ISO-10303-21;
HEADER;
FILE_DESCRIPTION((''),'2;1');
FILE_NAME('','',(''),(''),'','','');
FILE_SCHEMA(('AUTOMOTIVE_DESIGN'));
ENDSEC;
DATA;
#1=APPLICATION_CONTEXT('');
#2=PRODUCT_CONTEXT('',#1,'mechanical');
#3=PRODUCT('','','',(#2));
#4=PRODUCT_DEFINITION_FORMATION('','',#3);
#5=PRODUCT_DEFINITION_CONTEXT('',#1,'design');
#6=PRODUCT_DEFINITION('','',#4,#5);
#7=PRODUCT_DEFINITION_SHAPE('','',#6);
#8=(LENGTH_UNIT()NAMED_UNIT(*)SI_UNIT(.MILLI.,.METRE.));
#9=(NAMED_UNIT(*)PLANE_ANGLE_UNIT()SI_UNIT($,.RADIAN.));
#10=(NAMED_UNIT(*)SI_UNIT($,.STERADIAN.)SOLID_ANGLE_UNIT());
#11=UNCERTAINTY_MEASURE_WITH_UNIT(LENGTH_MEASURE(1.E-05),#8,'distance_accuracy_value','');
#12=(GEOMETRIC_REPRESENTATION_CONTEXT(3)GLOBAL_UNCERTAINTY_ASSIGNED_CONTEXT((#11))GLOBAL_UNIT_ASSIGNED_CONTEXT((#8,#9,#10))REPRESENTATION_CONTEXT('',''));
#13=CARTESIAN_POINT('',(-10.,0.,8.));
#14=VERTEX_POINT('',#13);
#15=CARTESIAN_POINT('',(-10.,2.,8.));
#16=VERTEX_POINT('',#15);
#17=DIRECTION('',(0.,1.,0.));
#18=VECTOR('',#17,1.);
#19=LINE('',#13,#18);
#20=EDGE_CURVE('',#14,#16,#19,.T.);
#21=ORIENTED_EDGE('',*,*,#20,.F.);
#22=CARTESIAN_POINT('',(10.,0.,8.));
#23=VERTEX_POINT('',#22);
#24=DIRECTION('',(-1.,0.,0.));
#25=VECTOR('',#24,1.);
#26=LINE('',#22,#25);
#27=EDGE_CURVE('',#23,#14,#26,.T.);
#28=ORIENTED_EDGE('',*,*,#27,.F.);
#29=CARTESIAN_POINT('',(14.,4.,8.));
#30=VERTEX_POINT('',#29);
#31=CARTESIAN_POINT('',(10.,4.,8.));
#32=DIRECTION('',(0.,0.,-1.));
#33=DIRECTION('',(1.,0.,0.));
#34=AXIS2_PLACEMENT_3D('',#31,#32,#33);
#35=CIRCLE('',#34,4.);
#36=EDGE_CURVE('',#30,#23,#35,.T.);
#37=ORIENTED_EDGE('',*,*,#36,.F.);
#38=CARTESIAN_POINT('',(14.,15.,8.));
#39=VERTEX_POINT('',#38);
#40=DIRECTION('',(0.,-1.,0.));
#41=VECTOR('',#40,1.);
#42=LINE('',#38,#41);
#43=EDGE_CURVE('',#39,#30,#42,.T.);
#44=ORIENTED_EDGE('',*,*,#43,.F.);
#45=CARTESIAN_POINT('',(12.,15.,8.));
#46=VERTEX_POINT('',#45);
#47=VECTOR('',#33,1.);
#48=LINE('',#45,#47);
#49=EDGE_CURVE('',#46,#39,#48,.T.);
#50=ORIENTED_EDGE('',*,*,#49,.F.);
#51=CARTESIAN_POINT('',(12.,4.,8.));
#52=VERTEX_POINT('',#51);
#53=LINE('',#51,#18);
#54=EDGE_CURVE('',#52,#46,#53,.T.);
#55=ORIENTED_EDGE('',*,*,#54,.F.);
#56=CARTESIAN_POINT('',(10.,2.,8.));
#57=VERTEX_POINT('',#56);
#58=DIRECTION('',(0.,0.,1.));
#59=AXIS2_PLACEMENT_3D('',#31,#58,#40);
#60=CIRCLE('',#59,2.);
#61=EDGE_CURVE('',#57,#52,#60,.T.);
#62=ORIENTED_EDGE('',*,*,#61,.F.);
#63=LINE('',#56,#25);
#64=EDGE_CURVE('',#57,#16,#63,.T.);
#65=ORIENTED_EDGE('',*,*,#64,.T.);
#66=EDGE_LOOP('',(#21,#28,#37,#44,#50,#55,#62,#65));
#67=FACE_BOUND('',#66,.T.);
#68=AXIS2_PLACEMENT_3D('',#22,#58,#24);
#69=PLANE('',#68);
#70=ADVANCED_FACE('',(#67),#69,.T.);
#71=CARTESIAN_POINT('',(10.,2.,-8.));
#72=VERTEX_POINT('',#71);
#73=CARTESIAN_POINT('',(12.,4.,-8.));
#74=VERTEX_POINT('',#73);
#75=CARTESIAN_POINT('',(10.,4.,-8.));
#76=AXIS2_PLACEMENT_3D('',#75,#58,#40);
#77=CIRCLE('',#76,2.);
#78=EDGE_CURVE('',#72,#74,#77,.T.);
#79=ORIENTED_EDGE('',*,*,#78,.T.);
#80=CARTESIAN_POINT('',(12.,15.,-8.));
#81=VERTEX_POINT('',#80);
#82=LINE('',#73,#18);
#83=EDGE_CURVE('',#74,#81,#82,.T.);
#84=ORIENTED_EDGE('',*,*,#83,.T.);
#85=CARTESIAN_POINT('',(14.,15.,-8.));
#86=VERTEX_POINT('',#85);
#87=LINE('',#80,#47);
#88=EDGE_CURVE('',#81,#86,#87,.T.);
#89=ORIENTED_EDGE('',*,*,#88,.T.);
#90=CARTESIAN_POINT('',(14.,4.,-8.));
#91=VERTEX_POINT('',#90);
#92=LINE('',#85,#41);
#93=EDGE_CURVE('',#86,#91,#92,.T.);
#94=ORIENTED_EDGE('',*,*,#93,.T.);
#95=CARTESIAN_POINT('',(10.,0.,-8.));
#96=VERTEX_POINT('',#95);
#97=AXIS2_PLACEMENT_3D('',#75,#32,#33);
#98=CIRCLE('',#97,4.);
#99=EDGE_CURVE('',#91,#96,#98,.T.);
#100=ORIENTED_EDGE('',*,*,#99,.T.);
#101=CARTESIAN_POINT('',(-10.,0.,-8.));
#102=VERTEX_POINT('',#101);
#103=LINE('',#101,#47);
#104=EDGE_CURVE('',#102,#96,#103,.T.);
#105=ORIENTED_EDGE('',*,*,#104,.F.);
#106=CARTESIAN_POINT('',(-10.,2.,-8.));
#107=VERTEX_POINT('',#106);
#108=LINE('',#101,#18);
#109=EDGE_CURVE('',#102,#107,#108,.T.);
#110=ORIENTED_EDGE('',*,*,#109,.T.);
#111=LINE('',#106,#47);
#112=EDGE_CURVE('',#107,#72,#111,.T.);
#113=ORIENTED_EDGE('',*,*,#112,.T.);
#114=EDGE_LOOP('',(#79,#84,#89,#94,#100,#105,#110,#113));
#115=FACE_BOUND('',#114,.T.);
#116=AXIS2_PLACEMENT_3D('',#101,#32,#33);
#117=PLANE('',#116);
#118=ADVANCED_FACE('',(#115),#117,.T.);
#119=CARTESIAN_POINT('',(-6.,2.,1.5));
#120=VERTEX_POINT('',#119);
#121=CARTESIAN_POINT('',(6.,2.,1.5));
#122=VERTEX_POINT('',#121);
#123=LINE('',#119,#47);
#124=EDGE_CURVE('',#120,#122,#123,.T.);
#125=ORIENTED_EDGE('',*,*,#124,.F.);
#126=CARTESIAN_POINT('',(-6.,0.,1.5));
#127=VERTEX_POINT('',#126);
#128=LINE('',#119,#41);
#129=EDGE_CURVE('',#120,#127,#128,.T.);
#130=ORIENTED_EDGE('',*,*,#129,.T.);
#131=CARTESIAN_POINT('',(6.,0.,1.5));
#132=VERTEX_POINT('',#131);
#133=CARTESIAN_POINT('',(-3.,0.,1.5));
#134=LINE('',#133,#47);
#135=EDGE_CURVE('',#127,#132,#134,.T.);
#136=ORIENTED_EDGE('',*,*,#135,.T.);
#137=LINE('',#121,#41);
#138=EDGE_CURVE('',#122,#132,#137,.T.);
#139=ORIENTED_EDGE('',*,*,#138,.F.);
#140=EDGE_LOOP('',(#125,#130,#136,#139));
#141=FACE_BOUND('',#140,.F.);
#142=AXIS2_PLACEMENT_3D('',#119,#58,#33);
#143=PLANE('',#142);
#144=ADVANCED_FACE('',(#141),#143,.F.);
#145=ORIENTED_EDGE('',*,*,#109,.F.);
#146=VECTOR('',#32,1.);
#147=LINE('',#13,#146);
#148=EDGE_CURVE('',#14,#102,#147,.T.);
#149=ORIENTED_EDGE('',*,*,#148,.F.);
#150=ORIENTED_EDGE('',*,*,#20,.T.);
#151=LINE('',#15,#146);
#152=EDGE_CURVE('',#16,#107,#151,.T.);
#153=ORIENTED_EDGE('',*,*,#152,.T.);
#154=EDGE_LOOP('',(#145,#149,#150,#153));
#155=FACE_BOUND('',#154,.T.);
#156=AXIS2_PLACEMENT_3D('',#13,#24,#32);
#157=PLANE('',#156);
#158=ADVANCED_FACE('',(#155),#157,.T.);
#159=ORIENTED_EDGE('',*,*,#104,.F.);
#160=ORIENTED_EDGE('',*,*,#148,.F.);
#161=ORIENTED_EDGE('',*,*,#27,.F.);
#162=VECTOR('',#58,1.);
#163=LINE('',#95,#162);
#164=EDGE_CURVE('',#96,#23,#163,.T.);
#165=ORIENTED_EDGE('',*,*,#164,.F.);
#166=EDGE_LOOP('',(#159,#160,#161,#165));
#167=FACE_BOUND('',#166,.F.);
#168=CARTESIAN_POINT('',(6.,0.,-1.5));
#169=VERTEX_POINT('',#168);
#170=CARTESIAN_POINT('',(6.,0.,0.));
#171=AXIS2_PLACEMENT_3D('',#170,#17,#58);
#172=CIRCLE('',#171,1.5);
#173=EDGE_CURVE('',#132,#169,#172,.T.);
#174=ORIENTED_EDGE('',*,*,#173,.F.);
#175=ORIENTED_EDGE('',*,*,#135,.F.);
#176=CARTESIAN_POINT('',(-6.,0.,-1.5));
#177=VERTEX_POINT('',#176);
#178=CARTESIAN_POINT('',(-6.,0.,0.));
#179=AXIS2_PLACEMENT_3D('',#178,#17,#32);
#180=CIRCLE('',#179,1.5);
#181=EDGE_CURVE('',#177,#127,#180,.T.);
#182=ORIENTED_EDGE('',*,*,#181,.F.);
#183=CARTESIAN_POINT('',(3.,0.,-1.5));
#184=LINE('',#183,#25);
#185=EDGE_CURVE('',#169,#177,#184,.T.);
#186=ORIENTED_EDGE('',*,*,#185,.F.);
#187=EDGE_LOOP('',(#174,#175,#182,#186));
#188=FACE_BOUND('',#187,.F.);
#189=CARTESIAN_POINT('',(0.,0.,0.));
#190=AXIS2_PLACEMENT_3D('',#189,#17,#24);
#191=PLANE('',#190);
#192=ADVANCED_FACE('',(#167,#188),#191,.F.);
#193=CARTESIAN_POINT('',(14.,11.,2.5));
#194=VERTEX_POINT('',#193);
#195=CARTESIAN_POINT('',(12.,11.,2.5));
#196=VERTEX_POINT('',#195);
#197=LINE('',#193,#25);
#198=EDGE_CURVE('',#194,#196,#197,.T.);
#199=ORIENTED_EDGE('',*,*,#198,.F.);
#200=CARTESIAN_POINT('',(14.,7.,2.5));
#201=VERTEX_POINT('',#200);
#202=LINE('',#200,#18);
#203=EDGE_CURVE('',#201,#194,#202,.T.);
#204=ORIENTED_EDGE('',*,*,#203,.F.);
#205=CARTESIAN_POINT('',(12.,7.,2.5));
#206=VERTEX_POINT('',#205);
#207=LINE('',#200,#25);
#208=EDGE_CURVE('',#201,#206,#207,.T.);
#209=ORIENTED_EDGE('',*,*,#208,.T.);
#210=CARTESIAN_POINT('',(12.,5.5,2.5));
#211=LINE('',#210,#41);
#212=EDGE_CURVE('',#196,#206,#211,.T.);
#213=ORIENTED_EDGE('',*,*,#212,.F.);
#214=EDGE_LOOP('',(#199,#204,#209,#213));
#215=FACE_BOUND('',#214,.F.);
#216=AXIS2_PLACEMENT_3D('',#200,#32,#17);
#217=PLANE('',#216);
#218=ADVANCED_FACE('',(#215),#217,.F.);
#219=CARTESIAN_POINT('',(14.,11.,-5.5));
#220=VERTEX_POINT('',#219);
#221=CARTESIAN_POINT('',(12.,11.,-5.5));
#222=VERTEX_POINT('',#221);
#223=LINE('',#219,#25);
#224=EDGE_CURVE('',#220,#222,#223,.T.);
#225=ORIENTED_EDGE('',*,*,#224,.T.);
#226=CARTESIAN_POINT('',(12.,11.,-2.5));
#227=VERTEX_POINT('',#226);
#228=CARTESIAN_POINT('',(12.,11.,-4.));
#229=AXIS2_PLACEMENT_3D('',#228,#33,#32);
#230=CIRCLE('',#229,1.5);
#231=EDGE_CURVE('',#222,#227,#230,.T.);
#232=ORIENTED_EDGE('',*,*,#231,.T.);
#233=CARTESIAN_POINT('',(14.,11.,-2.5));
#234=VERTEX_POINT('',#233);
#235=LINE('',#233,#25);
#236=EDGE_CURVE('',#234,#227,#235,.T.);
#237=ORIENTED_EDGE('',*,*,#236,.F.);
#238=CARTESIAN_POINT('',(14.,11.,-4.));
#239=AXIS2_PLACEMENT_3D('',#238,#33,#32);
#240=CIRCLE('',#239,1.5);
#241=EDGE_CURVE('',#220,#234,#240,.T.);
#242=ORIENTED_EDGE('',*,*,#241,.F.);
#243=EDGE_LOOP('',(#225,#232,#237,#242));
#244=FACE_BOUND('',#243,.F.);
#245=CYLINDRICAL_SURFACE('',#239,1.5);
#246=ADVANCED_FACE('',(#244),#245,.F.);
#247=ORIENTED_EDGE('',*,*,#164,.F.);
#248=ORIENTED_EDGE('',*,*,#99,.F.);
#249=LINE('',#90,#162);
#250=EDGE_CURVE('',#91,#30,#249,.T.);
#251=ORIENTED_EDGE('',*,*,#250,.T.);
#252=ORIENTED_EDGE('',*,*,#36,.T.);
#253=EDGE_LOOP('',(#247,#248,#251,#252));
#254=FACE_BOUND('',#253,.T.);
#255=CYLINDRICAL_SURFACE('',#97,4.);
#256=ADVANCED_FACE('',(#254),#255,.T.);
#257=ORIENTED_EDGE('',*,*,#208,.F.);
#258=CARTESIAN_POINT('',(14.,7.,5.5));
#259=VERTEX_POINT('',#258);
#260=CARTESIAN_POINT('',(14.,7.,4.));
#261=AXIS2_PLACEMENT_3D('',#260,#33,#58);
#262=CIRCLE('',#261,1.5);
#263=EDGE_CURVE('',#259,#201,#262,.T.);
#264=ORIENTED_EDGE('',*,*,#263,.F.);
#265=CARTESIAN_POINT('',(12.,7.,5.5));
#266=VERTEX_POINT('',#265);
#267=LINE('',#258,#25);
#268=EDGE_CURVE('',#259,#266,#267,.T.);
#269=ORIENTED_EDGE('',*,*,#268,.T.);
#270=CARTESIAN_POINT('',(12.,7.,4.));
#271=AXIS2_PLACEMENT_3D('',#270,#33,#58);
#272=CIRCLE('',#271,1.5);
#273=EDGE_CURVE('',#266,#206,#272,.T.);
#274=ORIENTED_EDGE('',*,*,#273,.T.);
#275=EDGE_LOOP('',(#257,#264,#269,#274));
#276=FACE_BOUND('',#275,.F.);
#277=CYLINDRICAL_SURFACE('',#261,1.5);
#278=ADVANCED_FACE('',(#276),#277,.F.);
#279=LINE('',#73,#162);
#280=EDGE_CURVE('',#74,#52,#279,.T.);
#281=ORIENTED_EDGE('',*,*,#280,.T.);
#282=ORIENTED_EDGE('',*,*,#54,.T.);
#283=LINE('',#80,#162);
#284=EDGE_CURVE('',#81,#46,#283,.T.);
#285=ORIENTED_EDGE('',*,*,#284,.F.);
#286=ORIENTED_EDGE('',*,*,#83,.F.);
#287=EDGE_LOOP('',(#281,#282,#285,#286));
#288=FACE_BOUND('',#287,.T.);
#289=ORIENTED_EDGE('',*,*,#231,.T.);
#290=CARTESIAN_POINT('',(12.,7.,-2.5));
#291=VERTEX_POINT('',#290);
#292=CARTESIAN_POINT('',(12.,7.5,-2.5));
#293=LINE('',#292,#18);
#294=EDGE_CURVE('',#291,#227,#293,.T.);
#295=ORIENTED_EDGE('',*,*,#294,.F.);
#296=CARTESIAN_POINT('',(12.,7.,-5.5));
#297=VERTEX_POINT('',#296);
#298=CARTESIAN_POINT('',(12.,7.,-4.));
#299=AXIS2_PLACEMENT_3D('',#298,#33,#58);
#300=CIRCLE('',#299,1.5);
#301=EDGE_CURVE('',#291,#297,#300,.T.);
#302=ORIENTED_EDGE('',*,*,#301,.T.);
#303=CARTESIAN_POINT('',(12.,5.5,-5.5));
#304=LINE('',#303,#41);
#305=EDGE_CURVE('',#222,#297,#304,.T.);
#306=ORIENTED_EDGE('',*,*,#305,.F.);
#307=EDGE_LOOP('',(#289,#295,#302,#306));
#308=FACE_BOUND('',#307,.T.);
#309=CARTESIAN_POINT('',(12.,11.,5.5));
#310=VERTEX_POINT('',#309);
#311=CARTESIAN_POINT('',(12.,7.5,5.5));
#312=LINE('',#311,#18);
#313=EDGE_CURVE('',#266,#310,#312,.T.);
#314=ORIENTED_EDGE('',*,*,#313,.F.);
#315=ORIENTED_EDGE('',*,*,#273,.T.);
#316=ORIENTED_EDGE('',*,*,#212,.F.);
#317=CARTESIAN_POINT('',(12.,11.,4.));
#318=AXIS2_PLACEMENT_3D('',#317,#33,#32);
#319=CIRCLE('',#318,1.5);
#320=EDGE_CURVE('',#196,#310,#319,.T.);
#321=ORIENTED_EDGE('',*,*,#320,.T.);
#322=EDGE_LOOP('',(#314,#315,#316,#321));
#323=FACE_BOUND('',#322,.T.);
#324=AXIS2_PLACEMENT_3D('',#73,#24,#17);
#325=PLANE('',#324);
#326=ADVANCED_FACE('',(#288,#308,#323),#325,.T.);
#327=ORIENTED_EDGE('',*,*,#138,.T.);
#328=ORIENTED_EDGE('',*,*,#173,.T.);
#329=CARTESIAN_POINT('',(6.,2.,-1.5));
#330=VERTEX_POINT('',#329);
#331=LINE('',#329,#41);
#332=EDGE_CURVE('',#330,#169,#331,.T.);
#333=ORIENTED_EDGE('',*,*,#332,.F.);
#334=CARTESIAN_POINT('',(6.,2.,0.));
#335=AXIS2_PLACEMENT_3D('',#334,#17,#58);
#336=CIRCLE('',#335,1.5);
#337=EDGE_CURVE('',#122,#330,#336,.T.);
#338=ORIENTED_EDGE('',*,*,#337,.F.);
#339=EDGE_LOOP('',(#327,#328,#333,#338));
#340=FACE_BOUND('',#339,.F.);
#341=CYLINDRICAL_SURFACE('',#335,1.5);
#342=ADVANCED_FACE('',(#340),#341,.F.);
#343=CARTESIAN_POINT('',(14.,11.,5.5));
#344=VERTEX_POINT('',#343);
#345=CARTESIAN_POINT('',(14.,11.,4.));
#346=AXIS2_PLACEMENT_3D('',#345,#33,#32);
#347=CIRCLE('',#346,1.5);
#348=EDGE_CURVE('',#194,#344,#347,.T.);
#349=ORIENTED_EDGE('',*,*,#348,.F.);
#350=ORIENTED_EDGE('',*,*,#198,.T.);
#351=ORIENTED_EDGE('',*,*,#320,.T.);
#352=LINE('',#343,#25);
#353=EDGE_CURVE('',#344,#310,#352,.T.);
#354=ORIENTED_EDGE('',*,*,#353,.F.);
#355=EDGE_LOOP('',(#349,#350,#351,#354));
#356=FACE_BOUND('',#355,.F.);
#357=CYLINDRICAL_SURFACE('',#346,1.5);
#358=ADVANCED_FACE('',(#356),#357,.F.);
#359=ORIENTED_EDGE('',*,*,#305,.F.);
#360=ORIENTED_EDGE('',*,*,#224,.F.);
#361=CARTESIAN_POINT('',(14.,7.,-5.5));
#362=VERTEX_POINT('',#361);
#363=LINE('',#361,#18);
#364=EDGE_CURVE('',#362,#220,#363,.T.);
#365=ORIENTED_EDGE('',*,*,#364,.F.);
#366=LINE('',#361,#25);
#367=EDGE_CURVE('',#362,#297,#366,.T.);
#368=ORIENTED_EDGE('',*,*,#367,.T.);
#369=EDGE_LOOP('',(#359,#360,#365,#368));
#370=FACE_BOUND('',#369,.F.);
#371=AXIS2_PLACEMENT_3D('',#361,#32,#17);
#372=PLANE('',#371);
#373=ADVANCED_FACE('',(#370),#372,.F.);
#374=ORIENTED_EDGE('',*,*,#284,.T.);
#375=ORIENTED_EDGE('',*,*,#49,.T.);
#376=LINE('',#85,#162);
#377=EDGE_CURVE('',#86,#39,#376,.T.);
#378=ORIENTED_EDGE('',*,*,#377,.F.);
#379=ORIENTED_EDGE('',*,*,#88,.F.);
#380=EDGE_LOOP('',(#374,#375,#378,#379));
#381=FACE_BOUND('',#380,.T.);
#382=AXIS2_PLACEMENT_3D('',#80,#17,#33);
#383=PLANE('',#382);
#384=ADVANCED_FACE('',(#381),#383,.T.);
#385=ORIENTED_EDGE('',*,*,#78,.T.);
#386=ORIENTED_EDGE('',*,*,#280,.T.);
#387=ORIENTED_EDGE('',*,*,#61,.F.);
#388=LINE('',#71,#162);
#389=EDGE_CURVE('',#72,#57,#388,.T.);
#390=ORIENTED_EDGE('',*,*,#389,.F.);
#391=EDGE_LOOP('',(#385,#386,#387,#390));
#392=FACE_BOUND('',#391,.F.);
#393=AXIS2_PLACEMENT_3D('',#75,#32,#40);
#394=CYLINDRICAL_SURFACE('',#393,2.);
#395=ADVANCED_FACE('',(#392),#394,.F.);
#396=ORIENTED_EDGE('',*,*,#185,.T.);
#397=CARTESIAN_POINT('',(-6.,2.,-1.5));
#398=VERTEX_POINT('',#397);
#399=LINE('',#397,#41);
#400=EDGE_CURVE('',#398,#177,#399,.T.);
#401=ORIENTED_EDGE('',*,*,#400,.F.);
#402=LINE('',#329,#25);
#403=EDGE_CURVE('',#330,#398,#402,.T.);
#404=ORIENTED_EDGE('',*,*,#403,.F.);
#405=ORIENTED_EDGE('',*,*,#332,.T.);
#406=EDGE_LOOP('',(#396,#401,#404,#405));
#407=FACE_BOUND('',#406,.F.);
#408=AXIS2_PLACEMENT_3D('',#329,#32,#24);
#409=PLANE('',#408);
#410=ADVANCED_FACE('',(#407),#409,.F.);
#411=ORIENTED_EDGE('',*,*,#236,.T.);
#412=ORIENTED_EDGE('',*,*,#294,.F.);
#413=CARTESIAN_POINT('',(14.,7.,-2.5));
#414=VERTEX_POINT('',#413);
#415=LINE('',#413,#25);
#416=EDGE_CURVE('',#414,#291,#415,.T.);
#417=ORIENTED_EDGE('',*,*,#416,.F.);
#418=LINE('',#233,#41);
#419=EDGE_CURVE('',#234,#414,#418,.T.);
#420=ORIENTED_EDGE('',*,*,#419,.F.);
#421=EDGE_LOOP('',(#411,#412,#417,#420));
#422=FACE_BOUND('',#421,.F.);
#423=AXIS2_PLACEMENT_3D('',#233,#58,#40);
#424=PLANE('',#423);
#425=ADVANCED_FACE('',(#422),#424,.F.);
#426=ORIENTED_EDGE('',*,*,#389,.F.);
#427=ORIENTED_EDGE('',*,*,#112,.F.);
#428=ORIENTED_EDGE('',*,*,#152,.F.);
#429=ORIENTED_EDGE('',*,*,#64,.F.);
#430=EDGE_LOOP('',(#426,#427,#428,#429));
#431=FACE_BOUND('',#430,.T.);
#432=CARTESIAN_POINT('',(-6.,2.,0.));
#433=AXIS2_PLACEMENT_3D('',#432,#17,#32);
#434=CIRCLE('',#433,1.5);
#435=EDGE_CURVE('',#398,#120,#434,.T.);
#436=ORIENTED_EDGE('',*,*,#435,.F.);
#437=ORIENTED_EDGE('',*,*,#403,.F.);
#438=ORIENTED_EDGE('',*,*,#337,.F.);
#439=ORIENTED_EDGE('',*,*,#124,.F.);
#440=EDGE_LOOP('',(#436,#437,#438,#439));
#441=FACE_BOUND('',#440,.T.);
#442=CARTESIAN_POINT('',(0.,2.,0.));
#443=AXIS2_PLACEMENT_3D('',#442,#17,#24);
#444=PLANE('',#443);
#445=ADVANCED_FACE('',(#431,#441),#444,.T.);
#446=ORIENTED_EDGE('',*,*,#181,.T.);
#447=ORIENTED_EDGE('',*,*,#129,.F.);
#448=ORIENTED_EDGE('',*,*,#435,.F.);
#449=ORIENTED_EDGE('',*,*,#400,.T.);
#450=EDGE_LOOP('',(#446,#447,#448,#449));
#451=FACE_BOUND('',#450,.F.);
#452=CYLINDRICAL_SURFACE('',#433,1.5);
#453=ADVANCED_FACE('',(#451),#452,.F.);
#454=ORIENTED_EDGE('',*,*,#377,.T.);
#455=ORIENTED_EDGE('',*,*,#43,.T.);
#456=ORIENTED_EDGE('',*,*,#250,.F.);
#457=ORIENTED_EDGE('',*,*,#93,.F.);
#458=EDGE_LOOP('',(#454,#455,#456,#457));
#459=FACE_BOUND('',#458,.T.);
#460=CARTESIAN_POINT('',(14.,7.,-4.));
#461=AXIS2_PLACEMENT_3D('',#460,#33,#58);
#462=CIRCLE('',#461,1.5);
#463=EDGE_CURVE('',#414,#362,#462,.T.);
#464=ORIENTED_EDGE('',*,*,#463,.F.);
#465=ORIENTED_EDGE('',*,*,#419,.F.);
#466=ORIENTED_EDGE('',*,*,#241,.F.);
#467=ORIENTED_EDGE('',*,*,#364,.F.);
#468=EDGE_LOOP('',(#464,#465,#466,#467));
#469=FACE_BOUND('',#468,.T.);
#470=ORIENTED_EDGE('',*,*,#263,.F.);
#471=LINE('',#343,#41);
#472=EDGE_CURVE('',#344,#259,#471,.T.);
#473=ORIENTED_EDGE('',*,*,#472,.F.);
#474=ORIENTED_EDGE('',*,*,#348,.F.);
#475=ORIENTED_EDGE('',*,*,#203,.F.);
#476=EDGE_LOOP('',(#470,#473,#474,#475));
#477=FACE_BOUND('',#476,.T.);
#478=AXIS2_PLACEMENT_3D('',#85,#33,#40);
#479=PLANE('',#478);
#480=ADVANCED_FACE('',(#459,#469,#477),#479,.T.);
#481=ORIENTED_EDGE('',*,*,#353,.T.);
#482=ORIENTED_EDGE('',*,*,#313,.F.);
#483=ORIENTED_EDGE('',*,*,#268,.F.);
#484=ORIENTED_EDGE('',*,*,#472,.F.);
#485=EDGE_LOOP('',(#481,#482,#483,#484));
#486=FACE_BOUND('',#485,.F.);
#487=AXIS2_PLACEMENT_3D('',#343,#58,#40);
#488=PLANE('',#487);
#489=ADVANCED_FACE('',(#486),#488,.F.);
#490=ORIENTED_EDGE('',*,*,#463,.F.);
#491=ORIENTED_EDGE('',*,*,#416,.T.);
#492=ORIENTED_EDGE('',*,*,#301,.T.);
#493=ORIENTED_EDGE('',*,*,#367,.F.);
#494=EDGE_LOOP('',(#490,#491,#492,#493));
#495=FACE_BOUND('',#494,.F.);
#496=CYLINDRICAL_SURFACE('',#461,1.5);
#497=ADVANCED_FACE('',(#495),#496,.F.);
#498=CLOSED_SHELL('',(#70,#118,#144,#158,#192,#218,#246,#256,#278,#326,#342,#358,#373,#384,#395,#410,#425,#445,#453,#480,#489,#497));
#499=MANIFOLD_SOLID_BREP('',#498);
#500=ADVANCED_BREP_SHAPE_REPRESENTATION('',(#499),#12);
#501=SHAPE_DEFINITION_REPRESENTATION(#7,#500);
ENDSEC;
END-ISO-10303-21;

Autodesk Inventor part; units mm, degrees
ref_plane "YZ Plane" through (0, 0, 0) normal (1, 0, 0) x (0, 1, 0)
ref_plane "XZ Plane" through (0, 0, 0) normal (0, 1, 0) x (-1, 0, 0)
ref_plane "XY Plane" through (0, 0, 0) normal (0, 0, 1) x (1, 0, 0)
sketch "スケッチ1" plane through (0, 0, 0) normal (0, 1, 0) x (-1, 0, 0)
  line L0 (-10, 8) -> (10, 8)
  line L1 (10, 8) -> (10, -8)
  line L2 (10, -8) -> (-10, -8)
  line L3 (-10, -8) -> (-10, 8)
  line L4 (-10, 8) -> (10, -8) construction
  line L5 (10, 8) -> (-10, -8) construction
  point P0 (0, 0)
  dimension "d0" = 20
  dimension "d1" = 16
extrude "プレート1" add sketch "スケッチ1" along normal blind 2
sketch "スケッチ2" plane through (12, 4, -8) normal (1, 0, 0) x (0, 1, 0)
  line L0 (0, 16) -> (0, 0)
  line L1 (0, 0) -> (11, 0)
  line L2 (11, 0) -> (11, 16)
  line L3 (11, 16) -> (0, 16)
edge flange "フランジ1" height 15 angle 90 thickness 2 bend radius 2 thickness toward (1, 0, 0) relief tear relief width 2 relief depth 1 edges at (10, 2, 0) wall of the first edge with corners at (12, 4, 8) (12, 4, -8) (12, 15, -8) (12, 15, 8)
bend "曲げ1"
corner "コーナー1"
sketch "スケッチ3" plane through (14, 15, 8) normal (1, 0, 0) x (0, 0, -1)
  line L0 (2.5, -4) -> (2.5, -8)
  arc A0 (2.5, -8) -> (5.5, -8) centre (4, -8) ccw
  line L1 (5.5, -8) -> (5.5, -4)
  arc A1 (5.5, -4) -> (2.5, -4) centre (4, -4) ccw
  line L2 (10.5, -4) -> (10.5, -8)
  arc A2 (10.5, -8) -> (13.5, -8) centre (12, -8) ccw
  line L3 (13.5, -8) -> (13.5, -4)
  arc A3 (13.5, -4) -> (10.5, -4) centre (12, -4) ccw
  line L4 (0, -11) -> (0, 0) projected
  line L5 (16, 0) -> (16, -11) projected
  line L6 (0, 0) -> (16, 0) projected
  line L7 (0, -11) -> (16, -11) projected
  point P0 (8, -15)
  dimension "d13" = 4
  dimension "d14" = 4
  dimension "d17" = 3
  dimension "d18" = 4
  dimension "d19" = 1.5
  dimension "d20" = 1.5
extrude "押し出し1" cut sketch "スケッチ3" against normal blind 10 contours A1 L1 A0 L0 | A3 L3 A2 L2
sketch "スケッチ4" plane through (0, 2, 0) normal (0, 1, 0) x (1, 0, 0)
  line L0 (-6, -1.5) -> (6, -1.5)
  arc A0 (6, -1.5) -> (6, 1.5) centre (6, 0) ccw
  line L1 (6, 1.5) -> (-6, 1.5)
  arc A1 (-6, 1.5) -> (-6, -1.5) centre (-6, 0) ccw
  line L2 (-10, -8) -> (-10, 8) projected
  line L3 (10, 8) -> (10, -8) projected
  point P0 (0, 0)
  dimension "d23" = 4
  dimension "d24" = 4
  dimension "d25" = 1.5
extrude "押し出し2" cut sketch "スケッチ4" against normal blind 10
equation "\"d2\" = Thickness"
equation "\"d3\" = BendReliefWidth"
equation "\"d4\" = BendReliefDepth"
equation "\"d5\" = MinimumRemnant"
equation "\"d6\" = TransitionRadius"
equation "\"d9\" = BendRadius"
equation "\"d10\" = CornerReliefSize"
equation "\"d11\" = GapSize"
equation "\"d12\" = JacobiRadiusSize"
equation "\"BendRadius\" = Thickness"
equation "\"BendReliefWidth\" = Thickness"
equation "\"BendReliefDepth\" = 0.5 * Thickness"
equation "\"CornerReliefSize\" = 4 * Thickness"
equation "\"MinimumRemnant\" = 2 * Thickness"
equation "\"TransitionRadius\" = BendRadius"
equation "\"JacobiRadiusSize\" = BendRadius"
equation "\"GapSize\" = Thickness"
equation "\"Thickness\" = 2"
properties part number "keyL_small" material "アルミニウム 6061"
